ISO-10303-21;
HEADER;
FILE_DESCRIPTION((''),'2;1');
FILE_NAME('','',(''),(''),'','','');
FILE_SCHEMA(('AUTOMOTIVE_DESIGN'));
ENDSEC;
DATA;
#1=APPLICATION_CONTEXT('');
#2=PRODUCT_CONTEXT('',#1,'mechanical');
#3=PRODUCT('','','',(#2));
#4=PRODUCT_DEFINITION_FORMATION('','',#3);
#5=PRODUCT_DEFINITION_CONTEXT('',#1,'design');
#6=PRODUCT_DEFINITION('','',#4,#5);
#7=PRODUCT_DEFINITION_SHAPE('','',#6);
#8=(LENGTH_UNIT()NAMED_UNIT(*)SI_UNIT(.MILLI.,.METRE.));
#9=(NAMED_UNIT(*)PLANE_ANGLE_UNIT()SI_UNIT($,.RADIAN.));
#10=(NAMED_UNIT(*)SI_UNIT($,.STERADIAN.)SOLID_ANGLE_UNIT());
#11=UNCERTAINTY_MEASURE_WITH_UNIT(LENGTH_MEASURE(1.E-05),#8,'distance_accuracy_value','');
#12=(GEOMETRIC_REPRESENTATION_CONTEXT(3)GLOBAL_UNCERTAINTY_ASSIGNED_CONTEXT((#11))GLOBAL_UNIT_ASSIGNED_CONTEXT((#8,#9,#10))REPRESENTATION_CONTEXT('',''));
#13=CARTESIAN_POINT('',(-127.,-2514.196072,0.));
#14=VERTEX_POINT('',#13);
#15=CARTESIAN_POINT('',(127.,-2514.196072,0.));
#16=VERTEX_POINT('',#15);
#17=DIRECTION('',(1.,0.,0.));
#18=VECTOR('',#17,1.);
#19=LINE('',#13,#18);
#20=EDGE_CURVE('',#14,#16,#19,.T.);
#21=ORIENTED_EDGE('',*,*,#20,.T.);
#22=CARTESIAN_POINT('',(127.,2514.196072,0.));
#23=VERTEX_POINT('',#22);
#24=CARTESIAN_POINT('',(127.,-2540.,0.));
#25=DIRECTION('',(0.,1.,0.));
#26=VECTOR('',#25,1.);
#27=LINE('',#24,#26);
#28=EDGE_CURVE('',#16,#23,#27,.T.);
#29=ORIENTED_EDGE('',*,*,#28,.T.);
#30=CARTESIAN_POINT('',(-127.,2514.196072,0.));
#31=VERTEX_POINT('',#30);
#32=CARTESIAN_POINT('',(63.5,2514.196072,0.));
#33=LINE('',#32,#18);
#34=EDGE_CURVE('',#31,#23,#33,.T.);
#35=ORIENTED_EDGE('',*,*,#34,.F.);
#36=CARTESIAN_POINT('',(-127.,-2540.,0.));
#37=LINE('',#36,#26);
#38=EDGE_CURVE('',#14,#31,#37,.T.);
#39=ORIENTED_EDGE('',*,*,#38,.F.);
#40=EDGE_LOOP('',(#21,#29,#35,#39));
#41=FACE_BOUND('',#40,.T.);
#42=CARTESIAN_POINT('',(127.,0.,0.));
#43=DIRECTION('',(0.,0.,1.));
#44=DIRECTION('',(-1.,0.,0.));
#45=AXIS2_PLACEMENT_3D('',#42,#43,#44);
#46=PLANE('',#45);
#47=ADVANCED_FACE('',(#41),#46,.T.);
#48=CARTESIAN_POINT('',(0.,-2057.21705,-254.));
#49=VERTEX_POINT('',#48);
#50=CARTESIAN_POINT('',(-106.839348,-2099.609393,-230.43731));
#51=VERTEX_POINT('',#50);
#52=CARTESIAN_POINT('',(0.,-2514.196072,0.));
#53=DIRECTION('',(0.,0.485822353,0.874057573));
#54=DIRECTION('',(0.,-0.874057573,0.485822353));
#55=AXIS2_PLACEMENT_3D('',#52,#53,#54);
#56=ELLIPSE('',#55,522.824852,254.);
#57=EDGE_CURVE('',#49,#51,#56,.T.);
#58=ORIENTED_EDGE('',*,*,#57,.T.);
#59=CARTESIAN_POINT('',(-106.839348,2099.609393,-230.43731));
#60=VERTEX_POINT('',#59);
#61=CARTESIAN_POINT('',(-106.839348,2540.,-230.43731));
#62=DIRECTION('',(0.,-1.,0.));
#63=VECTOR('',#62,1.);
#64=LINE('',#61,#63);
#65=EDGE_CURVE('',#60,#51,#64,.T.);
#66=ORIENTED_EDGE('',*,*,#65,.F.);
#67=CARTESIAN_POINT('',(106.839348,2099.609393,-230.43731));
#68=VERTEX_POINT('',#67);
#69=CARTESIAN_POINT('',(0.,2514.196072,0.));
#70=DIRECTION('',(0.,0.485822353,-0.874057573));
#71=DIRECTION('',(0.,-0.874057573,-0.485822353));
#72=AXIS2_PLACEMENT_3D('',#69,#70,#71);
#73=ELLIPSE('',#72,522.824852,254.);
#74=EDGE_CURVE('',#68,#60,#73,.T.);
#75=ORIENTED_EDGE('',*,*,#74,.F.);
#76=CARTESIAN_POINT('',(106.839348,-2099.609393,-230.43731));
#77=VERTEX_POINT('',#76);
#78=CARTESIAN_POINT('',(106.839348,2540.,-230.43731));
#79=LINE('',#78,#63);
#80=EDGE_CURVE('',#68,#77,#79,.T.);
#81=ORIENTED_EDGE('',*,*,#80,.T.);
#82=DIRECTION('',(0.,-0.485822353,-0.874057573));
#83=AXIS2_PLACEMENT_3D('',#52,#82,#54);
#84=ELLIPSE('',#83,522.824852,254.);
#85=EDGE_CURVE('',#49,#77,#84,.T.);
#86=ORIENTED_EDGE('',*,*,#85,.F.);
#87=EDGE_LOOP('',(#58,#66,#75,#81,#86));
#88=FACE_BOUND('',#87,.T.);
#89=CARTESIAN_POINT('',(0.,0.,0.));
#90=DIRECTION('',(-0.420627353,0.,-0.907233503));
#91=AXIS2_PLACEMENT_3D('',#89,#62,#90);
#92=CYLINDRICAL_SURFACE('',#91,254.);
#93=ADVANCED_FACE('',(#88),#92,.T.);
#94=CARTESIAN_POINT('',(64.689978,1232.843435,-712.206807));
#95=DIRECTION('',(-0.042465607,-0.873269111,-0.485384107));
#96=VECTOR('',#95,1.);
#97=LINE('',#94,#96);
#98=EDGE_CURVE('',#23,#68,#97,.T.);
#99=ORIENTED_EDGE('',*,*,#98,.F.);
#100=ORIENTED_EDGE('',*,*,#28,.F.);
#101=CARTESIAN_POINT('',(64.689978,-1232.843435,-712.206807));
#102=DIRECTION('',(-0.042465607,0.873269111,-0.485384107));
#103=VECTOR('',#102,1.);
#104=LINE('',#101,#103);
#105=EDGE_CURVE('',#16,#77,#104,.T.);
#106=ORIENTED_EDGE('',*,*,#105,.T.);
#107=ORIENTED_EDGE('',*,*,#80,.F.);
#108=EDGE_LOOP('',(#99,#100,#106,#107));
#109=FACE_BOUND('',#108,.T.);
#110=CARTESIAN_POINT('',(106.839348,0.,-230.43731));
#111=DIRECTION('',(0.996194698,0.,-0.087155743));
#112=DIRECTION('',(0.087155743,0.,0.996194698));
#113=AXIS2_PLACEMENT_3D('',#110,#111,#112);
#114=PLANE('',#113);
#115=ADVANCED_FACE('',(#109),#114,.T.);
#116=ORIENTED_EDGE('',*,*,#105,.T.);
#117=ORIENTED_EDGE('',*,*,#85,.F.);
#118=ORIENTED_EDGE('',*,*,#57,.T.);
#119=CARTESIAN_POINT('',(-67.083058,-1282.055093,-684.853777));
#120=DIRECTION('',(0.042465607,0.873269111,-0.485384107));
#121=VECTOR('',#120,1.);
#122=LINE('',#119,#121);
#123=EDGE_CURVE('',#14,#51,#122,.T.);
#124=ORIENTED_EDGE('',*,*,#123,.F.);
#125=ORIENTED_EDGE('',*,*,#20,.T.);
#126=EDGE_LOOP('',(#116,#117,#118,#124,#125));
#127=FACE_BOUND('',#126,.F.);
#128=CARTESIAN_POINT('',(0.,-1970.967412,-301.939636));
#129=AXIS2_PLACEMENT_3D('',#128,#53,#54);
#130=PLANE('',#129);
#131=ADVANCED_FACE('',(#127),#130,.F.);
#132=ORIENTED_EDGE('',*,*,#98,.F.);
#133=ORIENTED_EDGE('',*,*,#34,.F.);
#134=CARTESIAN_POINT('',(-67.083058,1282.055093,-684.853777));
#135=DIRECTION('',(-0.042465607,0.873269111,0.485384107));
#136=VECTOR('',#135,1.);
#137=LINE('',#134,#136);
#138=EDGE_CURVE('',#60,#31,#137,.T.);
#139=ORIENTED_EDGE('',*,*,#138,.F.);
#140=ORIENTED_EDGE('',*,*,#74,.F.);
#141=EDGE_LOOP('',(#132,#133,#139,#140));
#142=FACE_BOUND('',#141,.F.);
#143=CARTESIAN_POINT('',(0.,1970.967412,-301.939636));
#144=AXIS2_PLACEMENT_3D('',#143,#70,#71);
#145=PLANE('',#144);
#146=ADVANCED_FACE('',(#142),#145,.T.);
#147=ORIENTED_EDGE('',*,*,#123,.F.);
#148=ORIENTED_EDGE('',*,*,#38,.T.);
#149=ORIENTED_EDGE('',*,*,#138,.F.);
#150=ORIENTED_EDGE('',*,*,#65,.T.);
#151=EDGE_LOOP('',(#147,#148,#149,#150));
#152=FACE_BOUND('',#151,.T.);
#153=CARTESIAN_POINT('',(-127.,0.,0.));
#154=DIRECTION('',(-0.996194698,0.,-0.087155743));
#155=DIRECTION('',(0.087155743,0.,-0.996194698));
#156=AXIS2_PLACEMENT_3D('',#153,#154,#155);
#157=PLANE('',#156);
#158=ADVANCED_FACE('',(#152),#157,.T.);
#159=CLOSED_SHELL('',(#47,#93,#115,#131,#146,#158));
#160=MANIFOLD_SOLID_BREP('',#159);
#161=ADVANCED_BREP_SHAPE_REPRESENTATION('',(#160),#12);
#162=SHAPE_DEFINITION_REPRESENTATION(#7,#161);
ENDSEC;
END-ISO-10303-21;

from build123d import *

# Parameters (mm, degrees)
F1_DEPTH      = 2540
F3_DEPTH      = 127.001
F3_DEPTH_BACK = 127.001


# Not quite as in the source:
# - a pattern or mirror of a feature is missing from the dataset's text; its kind, count and spacing are read off the source's solid


with BuildPart() as f1:
    # F0 (on Front) → F1 (new body, symmetric)
    with BuildSketch(Plane.XZ):
        with BuildLine():
            Line((-127, 0), (-106.8393477338, -230.4373098607))
            ThreePointArc((-106.8393477338, -230.4373098607), (0, -254), (106.8393477338, -230.4373098607))
            Line((106.8393477338, -230.4373098607), (127, 0))
            Line((127, 0), (-127, 0))
        make_face()
    extrude(amount=F1_DEPTH, both=True)

    # F2 (on Right) → F3 (cut, two sides)
    with BuildSketch(Plane.YZ) as f3_sk:
        Polygon((-1970.9674119949, -301.9396364689), (-2584.4640731812, 39.0566559158), (-2584.4640731812, -301.9396364689), align=None)
    f3 = extrude(amount=F3_DEPTH, mode=Mode.SUBTRACT) + extrude(f3_sk.sketch, amount=-F3_DEPTH_BACK, mode=Mode.SUBTRACT)

    # F3_copies: F3 across plane
    add(f3.mirror(Plane.ZX), mode=Mode.SUBTRACT)


solid = f1.part
